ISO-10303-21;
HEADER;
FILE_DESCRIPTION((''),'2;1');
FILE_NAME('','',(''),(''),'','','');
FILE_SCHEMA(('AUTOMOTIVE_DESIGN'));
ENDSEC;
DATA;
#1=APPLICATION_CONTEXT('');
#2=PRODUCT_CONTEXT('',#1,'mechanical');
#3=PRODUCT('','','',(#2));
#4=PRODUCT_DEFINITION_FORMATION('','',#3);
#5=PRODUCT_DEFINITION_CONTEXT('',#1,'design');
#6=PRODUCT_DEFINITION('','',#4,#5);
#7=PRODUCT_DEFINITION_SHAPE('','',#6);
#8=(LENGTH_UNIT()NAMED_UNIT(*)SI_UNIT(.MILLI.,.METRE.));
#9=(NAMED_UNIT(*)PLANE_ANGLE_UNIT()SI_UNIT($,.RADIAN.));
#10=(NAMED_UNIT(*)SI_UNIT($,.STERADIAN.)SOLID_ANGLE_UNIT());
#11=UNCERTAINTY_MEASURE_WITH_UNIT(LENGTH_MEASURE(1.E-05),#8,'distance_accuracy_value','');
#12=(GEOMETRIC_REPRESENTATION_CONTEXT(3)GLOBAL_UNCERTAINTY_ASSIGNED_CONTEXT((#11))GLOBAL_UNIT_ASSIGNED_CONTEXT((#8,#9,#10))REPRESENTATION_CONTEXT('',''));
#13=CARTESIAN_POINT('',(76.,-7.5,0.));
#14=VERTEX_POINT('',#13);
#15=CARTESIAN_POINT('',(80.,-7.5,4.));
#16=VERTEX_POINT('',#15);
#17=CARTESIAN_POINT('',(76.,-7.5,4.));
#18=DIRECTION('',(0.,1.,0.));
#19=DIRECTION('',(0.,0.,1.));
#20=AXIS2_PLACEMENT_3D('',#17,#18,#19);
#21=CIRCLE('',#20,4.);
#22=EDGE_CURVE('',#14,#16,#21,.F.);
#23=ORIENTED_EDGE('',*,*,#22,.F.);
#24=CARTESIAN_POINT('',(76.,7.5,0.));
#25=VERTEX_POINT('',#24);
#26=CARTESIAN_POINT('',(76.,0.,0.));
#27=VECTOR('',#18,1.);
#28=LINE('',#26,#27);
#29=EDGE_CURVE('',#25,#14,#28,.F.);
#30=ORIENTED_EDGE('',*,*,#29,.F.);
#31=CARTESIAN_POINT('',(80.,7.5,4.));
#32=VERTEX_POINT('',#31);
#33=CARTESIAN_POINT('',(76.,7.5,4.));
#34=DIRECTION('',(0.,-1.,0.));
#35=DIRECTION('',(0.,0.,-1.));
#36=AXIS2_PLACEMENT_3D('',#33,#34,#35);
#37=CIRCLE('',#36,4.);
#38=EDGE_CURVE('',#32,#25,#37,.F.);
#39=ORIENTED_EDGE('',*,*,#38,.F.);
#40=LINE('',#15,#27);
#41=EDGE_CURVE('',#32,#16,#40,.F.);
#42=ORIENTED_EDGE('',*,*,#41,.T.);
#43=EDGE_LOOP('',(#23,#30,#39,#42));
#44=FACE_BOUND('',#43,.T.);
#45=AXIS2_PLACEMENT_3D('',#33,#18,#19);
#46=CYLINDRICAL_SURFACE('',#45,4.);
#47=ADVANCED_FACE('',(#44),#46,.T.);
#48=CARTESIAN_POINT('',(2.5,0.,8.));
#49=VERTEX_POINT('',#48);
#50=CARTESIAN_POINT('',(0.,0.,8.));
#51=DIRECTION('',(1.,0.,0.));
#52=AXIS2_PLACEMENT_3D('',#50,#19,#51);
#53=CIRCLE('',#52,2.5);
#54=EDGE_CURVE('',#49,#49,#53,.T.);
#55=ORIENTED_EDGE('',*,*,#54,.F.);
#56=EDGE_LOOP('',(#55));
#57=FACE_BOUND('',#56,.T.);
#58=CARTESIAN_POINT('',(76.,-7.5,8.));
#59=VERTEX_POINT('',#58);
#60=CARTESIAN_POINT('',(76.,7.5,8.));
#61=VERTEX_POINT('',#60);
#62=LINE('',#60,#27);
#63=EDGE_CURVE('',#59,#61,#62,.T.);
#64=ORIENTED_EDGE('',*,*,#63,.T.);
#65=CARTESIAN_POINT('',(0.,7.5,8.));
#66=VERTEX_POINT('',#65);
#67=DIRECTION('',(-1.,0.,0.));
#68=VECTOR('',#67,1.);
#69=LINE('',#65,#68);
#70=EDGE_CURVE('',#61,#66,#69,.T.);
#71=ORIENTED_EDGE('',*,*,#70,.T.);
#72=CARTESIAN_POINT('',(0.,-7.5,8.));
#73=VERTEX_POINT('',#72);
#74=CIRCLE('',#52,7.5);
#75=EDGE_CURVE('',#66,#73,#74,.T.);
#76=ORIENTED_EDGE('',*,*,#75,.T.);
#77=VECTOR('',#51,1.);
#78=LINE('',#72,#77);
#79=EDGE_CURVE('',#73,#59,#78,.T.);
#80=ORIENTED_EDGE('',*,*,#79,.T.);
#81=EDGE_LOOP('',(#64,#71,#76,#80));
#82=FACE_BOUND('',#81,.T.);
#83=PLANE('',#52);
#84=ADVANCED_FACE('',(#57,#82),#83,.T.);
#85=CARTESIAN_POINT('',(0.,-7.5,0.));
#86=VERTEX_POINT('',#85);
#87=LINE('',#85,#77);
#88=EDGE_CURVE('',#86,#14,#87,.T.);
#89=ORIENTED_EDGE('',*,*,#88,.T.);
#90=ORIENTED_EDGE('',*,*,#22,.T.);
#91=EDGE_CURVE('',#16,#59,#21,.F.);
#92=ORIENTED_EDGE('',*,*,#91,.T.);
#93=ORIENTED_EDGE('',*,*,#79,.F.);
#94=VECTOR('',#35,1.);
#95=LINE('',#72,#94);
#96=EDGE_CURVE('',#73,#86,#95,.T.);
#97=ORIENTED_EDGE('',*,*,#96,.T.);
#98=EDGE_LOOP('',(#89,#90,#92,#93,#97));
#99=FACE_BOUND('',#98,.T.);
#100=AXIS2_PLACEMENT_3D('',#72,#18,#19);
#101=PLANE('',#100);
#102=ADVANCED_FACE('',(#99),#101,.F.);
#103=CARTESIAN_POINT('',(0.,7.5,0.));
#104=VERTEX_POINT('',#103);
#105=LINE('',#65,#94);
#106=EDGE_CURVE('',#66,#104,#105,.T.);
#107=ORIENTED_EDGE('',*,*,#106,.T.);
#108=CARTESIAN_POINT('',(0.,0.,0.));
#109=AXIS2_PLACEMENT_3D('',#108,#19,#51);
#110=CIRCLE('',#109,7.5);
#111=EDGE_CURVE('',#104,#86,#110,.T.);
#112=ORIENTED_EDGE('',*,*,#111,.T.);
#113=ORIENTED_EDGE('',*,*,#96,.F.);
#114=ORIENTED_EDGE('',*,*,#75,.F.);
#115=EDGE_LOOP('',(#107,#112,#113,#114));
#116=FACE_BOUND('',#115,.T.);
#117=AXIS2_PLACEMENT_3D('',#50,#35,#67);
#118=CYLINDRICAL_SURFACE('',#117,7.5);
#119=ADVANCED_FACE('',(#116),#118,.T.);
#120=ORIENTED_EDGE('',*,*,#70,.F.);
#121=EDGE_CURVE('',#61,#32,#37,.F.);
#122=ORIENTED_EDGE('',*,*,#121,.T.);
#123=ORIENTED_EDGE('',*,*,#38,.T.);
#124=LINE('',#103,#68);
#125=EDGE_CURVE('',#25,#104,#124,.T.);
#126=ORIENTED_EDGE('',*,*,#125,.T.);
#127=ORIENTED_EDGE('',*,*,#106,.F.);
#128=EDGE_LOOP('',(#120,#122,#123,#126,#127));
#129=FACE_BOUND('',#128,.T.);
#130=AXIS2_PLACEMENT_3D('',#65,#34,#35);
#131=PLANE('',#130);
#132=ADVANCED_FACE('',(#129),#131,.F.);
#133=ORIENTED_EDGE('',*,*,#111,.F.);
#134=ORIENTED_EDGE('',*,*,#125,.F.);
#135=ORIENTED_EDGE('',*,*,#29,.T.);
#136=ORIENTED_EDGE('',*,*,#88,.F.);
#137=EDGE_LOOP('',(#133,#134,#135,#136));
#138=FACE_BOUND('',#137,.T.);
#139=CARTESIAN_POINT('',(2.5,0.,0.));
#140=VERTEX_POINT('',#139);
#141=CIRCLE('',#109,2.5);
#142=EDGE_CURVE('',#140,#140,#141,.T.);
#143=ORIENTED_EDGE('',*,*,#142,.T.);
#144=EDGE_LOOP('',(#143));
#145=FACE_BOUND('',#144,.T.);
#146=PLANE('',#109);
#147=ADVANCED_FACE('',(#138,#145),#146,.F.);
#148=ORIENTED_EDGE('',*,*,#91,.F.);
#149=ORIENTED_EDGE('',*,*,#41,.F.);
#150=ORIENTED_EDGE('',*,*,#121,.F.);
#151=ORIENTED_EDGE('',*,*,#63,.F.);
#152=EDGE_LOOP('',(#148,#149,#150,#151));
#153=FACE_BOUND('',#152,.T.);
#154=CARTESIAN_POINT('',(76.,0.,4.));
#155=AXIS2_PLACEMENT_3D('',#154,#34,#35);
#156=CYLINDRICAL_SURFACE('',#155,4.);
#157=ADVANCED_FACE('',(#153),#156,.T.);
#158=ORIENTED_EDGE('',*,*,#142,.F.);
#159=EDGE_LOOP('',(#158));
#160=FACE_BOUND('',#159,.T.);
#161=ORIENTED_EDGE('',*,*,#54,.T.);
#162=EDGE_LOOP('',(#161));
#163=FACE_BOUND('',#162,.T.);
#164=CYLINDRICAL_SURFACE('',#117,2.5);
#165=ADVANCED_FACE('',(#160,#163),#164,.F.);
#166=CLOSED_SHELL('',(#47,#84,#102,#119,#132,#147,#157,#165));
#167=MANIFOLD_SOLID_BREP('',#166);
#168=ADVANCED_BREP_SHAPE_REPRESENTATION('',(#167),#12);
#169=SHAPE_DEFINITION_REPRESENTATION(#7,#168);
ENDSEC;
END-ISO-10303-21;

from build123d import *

# Parameters (mm, degrees)
ESQUISSE1_R        = 2.5
BOSS_EXTRU_1_DEPTH = 8
CONG_1_R           = 4


with BuildPart() as part:
    # Esquisse1 → Boss.-Extru.1 (new body)
    with BuildSketch(Plane.XY):
        with BuildLine():
            Line((0, 7.5), (80, 7.5))
            Line((80, 7.5), (80, -7.5))
            Line((80, -7.5), (0, -7.5))
            ThreePointArc((0, -7.5), (-7.5, 0), (0, 7.5))
        make_face()
        Circle(ESQUISSE1_R, mode=Mode.SUBTRACT)
    extrude(amount=BOSS_EXTRU_1_DEPTH)

    # Congé1
    cong_1_edges = [part.edges().sort_by_distance(p)[0] for p in [
        (80, 0, 0),
        (80, 0, 8),
    ]]
    fillet(cong_1_edges, radius=CONG_1_R - 0.0001)  # a hair under: the kernel refuses the full size


solid = part.part
